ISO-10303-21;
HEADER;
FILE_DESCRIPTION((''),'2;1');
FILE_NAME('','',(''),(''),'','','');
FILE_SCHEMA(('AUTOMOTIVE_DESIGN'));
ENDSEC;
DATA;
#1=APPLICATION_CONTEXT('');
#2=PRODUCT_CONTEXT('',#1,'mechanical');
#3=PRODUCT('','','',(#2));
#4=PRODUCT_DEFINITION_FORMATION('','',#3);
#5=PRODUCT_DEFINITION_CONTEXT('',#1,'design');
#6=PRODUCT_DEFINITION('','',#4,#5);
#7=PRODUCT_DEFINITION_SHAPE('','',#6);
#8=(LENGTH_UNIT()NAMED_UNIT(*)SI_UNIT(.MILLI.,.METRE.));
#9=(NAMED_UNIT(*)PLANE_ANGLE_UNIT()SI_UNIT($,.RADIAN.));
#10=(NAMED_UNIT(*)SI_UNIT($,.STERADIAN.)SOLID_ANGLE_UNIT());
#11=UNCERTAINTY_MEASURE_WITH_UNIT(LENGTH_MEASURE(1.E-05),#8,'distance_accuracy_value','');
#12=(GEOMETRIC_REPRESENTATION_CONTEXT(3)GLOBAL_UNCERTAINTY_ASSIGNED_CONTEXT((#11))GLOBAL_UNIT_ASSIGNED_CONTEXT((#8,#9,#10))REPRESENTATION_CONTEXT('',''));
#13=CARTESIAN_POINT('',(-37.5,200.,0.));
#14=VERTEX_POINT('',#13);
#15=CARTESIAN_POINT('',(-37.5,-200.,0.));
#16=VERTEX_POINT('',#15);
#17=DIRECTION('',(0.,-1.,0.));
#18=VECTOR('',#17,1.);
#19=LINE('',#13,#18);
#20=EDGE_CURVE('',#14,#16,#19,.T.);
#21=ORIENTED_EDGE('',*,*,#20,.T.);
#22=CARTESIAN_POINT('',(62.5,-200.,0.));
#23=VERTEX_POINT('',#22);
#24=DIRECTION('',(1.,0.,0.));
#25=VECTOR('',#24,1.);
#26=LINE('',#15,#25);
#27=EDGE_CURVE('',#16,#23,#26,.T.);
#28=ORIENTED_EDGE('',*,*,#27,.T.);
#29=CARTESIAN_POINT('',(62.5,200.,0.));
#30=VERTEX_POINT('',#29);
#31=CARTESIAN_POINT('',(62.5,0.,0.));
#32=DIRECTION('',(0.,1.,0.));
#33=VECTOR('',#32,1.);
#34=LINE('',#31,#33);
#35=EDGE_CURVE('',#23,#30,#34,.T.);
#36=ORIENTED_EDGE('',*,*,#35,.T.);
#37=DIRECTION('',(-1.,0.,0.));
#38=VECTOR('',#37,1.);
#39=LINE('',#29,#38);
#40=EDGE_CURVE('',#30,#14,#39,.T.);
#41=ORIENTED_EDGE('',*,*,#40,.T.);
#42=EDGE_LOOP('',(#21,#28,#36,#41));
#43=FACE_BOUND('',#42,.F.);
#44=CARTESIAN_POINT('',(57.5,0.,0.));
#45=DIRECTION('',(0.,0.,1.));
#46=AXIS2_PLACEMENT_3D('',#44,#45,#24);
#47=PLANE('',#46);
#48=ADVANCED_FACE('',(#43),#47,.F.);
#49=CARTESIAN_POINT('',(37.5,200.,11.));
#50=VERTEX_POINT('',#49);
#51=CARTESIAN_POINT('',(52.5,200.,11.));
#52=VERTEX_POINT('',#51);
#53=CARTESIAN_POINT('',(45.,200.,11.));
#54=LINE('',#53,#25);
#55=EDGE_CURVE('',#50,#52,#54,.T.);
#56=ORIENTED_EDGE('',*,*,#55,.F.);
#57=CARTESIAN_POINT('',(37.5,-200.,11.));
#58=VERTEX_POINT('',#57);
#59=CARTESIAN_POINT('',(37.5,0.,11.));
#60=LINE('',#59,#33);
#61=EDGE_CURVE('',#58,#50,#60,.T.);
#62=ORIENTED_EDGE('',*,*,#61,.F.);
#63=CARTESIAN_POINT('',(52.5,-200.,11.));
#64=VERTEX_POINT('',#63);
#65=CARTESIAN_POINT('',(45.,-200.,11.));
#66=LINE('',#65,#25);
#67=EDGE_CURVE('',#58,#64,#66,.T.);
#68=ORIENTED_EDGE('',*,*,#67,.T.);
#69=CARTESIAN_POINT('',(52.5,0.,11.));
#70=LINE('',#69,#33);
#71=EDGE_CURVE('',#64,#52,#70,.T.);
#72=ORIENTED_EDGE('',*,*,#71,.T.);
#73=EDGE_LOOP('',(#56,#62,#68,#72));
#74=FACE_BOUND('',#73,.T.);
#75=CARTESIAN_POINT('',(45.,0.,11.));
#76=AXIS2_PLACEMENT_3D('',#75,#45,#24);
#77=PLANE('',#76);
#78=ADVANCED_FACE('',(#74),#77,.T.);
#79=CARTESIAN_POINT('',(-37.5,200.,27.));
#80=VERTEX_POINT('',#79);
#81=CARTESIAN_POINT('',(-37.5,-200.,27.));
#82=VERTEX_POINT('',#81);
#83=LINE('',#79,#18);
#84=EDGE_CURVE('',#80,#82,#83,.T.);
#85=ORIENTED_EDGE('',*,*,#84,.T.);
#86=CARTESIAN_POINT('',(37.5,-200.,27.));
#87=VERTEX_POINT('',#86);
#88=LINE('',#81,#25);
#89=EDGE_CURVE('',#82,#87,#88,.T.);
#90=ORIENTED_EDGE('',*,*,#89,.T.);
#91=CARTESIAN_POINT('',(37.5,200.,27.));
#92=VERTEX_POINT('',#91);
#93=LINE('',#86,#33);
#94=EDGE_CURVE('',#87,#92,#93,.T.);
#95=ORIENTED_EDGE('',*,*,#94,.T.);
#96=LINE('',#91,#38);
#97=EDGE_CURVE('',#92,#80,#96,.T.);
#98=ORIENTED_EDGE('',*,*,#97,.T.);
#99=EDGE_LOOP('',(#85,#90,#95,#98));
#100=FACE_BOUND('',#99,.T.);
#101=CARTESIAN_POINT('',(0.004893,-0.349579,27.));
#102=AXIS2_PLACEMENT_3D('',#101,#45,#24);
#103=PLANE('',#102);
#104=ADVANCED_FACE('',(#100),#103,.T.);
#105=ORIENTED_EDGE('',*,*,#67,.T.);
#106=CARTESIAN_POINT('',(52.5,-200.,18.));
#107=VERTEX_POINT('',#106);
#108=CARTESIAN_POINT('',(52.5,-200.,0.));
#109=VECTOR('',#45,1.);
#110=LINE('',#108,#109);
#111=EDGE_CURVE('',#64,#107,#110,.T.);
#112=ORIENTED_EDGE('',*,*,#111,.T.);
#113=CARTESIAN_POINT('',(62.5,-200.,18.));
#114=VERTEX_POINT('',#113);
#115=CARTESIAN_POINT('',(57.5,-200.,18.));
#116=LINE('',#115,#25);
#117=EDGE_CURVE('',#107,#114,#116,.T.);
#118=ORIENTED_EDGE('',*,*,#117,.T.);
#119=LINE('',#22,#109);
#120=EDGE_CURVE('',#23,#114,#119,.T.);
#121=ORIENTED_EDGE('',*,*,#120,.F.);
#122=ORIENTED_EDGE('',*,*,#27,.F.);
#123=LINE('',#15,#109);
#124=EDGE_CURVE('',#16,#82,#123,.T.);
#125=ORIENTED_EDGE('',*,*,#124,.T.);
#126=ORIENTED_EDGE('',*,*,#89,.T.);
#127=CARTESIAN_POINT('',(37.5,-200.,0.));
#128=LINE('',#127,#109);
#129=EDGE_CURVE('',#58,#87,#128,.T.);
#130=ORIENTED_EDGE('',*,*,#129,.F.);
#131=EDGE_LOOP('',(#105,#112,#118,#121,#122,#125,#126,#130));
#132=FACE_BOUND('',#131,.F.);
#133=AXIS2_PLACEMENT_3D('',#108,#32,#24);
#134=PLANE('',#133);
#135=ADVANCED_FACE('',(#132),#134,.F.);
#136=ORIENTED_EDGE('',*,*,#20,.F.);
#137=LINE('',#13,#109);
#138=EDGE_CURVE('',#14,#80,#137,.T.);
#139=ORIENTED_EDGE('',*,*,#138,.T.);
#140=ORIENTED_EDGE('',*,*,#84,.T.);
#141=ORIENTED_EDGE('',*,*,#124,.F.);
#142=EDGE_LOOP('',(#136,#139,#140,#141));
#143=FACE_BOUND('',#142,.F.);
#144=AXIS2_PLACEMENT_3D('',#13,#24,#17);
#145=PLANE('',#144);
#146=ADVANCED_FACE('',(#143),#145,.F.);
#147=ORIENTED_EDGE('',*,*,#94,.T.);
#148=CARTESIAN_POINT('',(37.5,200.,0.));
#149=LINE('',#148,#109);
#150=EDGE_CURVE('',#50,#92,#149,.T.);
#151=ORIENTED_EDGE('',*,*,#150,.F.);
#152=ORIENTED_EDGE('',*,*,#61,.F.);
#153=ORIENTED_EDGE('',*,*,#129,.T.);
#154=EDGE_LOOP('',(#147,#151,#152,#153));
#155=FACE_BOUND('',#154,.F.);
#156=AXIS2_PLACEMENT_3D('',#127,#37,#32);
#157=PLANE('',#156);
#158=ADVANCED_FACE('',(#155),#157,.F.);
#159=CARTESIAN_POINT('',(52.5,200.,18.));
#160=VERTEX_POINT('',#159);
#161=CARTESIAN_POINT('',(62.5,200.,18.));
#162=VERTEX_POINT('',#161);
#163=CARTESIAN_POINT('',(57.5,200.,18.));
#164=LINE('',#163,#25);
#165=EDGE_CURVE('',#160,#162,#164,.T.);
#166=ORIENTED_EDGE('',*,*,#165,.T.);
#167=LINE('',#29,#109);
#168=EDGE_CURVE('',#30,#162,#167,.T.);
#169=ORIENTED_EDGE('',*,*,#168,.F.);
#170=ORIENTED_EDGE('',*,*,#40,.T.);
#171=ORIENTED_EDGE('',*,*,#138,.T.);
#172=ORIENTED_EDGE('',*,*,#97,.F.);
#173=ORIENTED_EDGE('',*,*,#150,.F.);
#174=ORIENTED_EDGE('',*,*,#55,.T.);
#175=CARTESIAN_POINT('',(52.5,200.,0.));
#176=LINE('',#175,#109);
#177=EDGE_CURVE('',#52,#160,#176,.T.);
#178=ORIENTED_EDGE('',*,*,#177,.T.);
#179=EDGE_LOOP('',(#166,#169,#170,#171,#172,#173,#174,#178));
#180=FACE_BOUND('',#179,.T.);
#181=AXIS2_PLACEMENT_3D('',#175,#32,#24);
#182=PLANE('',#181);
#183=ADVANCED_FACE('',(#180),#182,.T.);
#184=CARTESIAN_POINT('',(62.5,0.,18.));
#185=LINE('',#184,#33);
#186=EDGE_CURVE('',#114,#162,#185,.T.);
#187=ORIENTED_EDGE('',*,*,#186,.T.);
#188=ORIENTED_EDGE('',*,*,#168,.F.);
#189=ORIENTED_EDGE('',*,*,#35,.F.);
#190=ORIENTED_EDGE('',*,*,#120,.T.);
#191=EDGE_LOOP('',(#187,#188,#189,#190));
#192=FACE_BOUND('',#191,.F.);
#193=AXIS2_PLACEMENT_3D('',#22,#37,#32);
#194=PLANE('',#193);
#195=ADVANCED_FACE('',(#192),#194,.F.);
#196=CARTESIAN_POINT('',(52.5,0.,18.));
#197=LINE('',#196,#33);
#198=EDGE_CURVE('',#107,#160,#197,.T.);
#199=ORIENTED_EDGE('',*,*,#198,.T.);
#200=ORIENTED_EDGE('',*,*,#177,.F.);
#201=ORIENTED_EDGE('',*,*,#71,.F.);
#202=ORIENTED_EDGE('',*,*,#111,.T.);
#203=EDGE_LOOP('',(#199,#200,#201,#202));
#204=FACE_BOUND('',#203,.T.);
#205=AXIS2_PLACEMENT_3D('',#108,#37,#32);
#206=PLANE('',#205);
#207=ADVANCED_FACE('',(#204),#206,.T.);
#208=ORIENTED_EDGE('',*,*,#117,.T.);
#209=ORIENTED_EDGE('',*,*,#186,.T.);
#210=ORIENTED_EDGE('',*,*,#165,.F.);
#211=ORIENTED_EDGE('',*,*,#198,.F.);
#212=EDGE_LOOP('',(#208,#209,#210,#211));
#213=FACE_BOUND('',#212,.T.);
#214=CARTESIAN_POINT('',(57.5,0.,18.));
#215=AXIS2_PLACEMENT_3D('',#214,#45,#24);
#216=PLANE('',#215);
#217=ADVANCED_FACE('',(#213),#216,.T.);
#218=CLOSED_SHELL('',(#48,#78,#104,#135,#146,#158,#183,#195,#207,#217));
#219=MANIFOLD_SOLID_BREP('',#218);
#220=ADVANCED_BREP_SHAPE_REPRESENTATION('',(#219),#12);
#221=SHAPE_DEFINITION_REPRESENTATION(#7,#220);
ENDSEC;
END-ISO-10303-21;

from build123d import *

# Parameters (mm, degrees)
F2_DEPTH = 27
F1_W     = 15
F1_H     = 400
F3_DEPTH = 11
F1_W_2   = 10
F4_DEPTH = 18


# Not quite as in the source:
# - a feature of the source that left no trace in its solid (it failed there, or was rolled back) is left out


with BuildPart() as f2:
    # F1 (on Top) → F2 (new body)
    with BuildSketch(Plane.XY):
        with BuildLine():
            Line((-1.25, 200), (-37.5, 200))
            Line((-37.5, 200), (-37.5, -200))
            Line((-37.5, -200), (37.5, -200))
            Line((37.5, -200), (37.5, 200))
            Line((37.5, 200), (1.25, 200))
            Line((1.25, 200), (1.25, -184.1316527028))
            ThreePointArc((1.25, -184.1316527028), (4.6636895265, -186.2250827824), (6, -190))
            ThreePointArc((6, -190), (-3.7749172176, -194.6636895265), (-1.25, -184.1316527028))
            Line((-1.25, -184.1316527028), (-1.25, 200))
        make_face()
        with BuildLine():
            Line((1.25, 200), (-1.25, 200))
            Line((-1.25, 200), (-1.25, -184.1316527028))
            ThreePointArc((-1.25, -184.1316527028), (0, -184), (1.25, -184.1316527028))
            Line((1.25, -184.1316527028), (1.25, 200))
        make_face()
        with BuildLine():
            ThreePointArc((1.25, -184.1316527028), (0, -184), (-1.25, -184.1316527028))
            ThreePointArc((-1.25, -184.1316527028), (-3.7749172176, -194.6636895265), (6, -190))
            ThreePointArc((6, -190), (4.6636895265, -186.2250827824), (1.25, -184.1316527028))
        make_face()
    extrude(amount=F2_DEPTH)

    # F1 (on Top) → F3 (join)
    with BuildSketch(Plane.XY):
        with Locations((45, 0)):
            Rectangle(F1_W, F1_H)
    extrude(amount=F3_DEPTH)

    # F1 (on Top) → F4 (join)
    with BuildSketch(Plane.XY):
        with Locations((57.5, 0)):
            Rectangle(F1_W_2, F1_H)
    extrude(amount=F4_DEPTH)


solid = f2.part
